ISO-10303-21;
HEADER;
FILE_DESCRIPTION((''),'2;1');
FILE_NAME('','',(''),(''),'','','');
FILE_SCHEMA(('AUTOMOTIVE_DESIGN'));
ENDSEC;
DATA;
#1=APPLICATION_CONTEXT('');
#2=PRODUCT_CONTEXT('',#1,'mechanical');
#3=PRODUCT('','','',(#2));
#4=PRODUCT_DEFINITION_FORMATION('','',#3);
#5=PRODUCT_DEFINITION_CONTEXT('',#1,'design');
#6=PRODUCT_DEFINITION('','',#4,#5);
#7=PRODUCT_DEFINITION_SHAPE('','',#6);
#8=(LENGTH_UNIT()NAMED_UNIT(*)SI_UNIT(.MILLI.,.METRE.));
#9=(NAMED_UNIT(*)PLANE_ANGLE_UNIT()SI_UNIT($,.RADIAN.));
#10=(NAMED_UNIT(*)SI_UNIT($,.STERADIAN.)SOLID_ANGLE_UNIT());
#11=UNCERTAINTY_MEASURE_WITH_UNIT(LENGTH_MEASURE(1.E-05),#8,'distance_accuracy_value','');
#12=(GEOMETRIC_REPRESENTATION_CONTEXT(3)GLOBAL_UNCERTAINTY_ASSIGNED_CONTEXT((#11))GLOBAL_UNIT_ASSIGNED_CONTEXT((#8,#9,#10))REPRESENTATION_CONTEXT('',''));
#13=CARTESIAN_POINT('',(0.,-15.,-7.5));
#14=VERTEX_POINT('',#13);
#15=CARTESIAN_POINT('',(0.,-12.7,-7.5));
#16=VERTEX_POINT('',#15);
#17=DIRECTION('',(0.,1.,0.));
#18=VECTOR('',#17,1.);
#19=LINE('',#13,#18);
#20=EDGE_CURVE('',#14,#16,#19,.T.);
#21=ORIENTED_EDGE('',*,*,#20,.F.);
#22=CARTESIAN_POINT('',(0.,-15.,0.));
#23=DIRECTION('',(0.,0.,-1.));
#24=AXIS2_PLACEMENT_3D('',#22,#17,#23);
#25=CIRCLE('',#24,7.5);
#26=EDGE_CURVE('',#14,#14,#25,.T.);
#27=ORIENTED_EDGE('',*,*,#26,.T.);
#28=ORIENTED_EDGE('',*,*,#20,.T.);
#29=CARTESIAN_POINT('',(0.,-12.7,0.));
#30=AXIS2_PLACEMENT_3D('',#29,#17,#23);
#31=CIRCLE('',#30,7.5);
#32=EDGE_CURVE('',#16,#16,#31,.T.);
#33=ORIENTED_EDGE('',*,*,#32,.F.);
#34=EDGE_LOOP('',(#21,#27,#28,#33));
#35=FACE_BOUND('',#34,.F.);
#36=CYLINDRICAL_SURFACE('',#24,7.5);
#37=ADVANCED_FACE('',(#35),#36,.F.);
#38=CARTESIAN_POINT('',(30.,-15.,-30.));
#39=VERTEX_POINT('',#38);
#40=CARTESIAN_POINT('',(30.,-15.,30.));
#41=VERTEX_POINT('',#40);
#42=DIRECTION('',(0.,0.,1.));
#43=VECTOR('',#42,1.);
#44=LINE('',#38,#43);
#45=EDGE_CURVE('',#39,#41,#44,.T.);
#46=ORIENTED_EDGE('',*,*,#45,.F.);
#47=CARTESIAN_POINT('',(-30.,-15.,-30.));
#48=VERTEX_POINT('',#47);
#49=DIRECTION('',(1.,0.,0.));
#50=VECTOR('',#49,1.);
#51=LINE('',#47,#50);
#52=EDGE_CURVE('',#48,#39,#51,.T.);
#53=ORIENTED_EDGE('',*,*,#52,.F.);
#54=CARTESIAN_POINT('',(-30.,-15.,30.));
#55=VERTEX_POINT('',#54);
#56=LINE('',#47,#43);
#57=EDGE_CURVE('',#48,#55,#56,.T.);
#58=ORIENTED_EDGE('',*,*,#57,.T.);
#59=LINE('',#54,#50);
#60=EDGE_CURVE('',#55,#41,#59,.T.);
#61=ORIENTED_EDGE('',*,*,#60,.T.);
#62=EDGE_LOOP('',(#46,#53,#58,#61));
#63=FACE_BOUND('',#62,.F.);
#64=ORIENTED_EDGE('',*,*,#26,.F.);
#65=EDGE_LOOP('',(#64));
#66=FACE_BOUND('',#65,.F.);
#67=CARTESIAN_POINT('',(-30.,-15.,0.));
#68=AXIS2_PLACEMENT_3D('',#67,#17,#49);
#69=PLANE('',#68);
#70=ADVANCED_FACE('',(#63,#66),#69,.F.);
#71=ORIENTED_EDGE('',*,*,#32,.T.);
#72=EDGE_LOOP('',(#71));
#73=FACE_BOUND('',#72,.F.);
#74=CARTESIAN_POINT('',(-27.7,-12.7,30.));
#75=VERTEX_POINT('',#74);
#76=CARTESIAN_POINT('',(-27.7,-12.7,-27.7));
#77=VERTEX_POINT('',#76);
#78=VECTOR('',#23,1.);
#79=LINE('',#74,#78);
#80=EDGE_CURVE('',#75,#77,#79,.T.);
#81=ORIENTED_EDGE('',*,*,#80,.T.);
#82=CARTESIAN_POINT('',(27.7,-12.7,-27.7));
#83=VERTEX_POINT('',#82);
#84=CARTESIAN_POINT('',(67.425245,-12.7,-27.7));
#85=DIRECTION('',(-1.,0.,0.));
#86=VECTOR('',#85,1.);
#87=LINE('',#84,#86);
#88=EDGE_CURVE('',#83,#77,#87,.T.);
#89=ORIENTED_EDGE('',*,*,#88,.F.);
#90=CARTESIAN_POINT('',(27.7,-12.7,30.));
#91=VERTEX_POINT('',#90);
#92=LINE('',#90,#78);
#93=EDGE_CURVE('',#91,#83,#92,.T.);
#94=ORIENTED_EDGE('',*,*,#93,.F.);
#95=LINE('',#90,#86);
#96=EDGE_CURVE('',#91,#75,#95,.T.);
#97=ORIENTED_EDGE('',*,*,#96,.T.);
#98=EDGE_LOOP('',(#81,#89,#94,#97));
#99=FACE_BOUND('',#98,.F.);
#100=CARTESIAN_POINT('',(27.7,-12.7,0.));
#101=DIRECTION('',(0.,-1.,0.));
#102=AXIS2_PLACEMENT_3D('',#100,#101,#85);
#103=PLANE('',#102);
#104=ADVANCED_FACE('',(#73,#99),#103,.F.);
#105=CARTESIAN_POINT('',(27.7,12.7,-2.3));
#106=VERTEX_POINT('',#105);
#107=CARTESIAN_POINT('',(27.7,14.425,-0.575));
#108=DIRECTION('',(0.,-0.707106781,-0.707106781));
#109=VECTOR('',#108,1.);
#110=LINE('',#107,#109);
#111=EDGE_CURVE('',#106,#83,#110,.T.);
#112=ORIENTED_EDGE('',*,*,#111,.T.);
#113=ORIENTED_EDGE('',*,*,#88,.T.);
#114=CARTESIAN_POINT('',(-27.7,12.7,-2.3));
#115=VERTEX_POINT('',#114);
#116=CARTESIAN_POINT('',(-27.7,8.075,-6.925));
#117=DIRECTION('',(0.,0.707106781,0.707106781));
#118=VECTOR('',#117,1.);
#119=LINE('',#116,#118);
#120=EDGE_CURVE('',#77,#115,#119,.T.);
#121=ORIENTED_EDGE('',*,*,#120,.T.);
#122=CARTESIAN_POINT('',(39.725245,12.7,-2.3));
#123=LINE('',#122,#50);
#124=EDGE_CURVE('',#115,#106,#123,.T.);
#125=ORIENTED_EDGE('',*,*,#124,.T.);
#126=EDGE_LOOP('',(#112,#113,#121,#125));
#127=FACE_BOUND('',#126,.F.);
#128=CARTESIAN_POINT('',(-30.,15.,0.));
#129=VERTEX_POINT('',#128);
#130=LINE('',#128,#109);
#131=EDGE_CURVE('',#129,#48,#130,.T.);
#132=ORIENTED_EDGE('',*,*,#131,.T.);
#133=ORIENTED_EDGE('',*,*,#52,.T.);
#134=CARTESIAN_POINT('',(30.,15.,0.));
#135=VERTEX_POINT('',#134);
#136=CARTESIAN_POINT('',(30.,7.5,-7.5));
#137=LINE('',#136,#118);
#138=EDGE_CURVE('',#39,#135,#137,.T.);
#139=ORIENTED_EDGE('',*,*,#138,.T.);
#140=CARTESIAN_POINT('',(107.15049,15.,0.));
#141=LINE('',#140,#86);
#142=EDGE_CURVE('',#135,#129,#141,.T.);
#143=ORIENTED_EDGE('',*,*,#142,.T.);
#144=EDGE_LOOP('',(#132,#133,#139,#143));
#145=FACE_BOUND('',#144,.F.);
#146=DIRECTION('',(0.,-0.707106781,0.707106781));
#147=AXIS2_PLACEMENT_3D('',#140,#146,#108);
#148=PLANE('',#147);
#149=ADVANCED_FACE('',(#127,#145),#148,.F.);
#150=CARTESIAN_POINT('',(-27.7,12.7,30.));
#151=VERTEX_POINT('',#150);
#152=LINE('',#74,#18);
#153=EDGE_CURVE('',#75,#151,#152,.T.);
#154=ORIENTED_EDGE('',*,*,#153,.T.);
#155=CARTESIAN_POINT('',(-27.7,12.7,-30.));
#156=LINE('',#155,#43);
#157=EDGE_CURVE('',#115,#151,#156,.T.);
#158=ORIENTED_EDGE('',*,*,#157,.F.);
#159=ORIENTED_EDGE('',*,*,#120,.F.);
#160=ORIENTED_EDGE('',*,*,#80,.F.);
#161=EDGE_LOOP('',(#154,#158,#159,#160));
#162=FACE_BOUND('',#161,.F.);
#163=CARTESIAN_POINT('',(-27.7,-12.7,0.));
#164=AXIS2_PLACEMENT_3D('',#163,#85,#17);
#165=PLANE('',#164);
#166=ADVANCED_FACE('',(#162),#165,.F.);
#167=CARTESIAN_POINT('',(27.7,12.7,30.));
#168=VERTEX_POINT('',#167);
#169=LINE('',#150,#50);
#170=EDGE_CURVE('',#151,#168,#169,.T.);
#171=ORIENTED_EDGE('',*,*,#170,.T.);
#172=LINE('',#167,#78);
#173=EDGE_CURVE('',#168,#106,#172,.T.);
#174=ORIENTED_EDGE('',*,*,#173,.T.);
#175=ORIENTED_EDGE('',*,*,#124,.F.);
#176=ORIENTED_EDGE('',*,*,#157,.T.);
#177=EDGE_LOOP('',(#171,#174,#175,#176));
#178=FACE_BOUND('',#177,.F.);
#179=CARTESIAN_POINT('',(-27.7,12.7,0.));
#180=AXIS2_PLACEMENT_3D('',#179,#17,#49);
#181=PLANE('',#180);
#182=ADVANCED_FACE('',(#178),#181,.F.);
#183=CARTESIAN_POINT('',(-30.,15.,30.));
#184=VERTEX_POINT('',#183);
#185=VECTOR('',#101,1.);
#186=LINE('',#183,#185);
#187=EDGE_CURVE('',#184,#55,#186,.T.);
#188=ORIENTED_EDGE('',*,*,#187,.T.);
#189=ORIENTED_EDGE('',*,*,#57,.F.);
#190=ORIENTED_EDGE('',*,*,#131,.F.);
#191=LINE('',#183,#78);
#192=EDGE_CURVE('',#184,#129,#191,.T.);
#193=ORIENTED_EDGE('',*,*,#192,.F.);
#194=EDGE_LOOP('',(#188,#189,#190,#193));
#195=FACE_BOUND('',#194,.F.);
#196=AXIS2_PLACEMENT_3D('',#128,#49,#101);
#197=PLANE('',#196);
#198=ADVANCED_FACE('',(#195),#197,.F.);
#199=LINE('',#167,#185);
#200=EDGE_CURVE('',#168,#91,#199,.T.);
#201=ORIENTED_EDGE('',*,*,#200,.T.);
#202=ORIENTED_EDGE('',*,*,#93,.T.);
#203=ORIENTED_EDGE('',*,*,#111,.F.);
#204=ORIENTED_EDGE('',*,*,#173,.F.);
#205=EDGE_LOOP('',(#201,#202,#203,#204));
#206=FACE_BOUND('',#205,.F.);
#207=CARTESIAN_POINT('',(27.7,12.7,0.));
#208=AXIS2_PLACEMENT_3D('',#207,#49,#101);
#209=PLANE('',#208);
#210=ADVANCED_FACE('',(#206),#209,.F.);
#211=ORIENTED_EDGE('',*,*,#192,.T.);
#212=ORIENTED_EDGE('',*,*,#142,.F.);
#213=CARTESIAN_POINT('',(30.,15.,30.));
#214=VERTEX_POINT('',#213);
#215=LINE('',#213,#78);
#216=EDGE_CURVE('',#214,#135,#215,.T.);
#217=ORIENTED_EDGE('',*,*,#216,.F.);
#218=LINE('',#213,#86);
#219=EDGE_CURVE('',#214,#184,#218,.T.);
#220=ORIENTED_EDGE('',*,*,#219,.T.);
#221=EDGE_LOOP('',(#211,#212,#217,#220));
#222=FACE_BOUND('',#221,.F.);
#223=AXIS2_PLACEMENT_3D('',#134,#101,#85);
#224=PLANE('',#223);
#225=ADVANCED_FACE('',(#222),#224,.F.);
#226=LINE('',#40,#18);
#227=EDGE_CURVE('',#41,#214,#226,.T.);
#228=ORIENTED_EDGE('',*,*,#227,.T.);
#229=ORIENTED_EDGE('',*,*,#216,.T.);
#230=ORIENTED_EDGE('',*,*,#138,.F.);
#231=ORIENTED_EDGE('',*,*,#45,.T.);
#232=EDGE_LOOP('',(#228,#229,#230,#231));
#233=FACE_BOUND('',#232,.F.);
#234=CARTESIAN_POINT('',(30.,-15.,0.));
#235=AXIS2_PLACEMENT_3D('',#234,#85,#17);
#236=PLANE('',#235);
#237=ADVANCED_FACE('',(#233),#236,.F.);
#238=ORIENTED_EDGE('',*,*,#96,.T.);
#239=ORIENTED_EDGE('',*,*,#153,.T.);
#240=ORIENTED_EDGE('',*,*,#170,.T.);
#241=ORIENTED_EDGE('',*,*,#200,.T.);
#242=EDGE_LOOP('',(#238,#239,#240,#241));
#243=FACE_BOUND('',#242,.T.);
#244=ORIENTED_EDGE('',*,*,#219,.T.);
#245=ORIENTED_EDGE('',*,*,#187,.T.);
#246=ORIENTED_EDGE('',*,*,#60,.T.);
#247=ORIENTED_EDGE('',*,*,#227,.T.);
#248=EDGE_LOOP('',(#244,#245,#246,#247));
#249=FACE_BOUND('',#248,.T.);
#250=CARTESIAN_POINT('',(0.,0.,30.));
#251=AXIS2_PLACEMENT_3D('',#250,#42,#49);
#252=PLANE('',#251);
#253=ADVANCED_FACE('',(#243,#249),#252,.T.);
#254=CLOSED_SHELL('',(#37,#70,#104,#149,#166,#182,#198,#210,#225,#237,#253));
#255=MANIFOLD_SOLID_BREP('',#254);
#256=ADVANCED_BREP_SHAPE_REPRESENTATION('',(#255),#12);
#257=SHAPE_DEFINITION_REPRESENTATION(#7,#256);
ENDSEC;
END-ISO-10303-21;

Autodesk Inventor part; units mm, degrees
ref_plane "YZ Plane" through (0, 0, 0) normal (1, 0, 0) x (0, 1, 0)
ref_plane "XZ Plane" through (0, 0, 0) normal (0, 1, 0) x (-1, 0, 0)
ref_plane "XY Plane" through (0, 0, 0) normal (0, 0, 1) x (1, 0, 0)
sketch "スケッチ1" plane through (0, 0, 0) normal (0, 0, 1) x (1, 0, 0)
  line L0 (-30, -15) -> (30, -15)
  line L1 (30, -15) -> (30, 15)
  line L2 (30, 15) -> (-30, 15)
  line L3 (-30, 15) -> (-30, -15)
  line L4 (-30, -15) -> (30, 15) construction
  line L5 (30, -15) -> (-30, 15) construction
  line L6 (-27.7, 12.7) -> (27.7, 12.7)
  line L7 (27.7, 12.7) -> (27.7, -12.7)
  line L8 (27.7, -12.7) -> (-27.7, -12.7)
  line L9 (-27.7, -12.7) -> (-27.7, 12.7)
  point P0 (0, 0)
  dimension "d0" = 60
  dimension "d1" = 30
  dimension "d2" = 2.3
extrude "押し出し1" add sketch "スケッチ1" along normal mid plane 60
chamfer "面取り1" distance 30 angle 45 1 edges at (0, 15, -30)
sketch "スケッチ2" plane through (-30, -15, 30) normal (0, -1, 0) x (1, 0, 0)
  point P0 (30, -30)
  point P1 (30, -30)
hole "穴1" at (0, -15, 0) direction (0, 1, 0) diameter 15 depth 10 tip angle 118
properties part number "車軸受け2"
